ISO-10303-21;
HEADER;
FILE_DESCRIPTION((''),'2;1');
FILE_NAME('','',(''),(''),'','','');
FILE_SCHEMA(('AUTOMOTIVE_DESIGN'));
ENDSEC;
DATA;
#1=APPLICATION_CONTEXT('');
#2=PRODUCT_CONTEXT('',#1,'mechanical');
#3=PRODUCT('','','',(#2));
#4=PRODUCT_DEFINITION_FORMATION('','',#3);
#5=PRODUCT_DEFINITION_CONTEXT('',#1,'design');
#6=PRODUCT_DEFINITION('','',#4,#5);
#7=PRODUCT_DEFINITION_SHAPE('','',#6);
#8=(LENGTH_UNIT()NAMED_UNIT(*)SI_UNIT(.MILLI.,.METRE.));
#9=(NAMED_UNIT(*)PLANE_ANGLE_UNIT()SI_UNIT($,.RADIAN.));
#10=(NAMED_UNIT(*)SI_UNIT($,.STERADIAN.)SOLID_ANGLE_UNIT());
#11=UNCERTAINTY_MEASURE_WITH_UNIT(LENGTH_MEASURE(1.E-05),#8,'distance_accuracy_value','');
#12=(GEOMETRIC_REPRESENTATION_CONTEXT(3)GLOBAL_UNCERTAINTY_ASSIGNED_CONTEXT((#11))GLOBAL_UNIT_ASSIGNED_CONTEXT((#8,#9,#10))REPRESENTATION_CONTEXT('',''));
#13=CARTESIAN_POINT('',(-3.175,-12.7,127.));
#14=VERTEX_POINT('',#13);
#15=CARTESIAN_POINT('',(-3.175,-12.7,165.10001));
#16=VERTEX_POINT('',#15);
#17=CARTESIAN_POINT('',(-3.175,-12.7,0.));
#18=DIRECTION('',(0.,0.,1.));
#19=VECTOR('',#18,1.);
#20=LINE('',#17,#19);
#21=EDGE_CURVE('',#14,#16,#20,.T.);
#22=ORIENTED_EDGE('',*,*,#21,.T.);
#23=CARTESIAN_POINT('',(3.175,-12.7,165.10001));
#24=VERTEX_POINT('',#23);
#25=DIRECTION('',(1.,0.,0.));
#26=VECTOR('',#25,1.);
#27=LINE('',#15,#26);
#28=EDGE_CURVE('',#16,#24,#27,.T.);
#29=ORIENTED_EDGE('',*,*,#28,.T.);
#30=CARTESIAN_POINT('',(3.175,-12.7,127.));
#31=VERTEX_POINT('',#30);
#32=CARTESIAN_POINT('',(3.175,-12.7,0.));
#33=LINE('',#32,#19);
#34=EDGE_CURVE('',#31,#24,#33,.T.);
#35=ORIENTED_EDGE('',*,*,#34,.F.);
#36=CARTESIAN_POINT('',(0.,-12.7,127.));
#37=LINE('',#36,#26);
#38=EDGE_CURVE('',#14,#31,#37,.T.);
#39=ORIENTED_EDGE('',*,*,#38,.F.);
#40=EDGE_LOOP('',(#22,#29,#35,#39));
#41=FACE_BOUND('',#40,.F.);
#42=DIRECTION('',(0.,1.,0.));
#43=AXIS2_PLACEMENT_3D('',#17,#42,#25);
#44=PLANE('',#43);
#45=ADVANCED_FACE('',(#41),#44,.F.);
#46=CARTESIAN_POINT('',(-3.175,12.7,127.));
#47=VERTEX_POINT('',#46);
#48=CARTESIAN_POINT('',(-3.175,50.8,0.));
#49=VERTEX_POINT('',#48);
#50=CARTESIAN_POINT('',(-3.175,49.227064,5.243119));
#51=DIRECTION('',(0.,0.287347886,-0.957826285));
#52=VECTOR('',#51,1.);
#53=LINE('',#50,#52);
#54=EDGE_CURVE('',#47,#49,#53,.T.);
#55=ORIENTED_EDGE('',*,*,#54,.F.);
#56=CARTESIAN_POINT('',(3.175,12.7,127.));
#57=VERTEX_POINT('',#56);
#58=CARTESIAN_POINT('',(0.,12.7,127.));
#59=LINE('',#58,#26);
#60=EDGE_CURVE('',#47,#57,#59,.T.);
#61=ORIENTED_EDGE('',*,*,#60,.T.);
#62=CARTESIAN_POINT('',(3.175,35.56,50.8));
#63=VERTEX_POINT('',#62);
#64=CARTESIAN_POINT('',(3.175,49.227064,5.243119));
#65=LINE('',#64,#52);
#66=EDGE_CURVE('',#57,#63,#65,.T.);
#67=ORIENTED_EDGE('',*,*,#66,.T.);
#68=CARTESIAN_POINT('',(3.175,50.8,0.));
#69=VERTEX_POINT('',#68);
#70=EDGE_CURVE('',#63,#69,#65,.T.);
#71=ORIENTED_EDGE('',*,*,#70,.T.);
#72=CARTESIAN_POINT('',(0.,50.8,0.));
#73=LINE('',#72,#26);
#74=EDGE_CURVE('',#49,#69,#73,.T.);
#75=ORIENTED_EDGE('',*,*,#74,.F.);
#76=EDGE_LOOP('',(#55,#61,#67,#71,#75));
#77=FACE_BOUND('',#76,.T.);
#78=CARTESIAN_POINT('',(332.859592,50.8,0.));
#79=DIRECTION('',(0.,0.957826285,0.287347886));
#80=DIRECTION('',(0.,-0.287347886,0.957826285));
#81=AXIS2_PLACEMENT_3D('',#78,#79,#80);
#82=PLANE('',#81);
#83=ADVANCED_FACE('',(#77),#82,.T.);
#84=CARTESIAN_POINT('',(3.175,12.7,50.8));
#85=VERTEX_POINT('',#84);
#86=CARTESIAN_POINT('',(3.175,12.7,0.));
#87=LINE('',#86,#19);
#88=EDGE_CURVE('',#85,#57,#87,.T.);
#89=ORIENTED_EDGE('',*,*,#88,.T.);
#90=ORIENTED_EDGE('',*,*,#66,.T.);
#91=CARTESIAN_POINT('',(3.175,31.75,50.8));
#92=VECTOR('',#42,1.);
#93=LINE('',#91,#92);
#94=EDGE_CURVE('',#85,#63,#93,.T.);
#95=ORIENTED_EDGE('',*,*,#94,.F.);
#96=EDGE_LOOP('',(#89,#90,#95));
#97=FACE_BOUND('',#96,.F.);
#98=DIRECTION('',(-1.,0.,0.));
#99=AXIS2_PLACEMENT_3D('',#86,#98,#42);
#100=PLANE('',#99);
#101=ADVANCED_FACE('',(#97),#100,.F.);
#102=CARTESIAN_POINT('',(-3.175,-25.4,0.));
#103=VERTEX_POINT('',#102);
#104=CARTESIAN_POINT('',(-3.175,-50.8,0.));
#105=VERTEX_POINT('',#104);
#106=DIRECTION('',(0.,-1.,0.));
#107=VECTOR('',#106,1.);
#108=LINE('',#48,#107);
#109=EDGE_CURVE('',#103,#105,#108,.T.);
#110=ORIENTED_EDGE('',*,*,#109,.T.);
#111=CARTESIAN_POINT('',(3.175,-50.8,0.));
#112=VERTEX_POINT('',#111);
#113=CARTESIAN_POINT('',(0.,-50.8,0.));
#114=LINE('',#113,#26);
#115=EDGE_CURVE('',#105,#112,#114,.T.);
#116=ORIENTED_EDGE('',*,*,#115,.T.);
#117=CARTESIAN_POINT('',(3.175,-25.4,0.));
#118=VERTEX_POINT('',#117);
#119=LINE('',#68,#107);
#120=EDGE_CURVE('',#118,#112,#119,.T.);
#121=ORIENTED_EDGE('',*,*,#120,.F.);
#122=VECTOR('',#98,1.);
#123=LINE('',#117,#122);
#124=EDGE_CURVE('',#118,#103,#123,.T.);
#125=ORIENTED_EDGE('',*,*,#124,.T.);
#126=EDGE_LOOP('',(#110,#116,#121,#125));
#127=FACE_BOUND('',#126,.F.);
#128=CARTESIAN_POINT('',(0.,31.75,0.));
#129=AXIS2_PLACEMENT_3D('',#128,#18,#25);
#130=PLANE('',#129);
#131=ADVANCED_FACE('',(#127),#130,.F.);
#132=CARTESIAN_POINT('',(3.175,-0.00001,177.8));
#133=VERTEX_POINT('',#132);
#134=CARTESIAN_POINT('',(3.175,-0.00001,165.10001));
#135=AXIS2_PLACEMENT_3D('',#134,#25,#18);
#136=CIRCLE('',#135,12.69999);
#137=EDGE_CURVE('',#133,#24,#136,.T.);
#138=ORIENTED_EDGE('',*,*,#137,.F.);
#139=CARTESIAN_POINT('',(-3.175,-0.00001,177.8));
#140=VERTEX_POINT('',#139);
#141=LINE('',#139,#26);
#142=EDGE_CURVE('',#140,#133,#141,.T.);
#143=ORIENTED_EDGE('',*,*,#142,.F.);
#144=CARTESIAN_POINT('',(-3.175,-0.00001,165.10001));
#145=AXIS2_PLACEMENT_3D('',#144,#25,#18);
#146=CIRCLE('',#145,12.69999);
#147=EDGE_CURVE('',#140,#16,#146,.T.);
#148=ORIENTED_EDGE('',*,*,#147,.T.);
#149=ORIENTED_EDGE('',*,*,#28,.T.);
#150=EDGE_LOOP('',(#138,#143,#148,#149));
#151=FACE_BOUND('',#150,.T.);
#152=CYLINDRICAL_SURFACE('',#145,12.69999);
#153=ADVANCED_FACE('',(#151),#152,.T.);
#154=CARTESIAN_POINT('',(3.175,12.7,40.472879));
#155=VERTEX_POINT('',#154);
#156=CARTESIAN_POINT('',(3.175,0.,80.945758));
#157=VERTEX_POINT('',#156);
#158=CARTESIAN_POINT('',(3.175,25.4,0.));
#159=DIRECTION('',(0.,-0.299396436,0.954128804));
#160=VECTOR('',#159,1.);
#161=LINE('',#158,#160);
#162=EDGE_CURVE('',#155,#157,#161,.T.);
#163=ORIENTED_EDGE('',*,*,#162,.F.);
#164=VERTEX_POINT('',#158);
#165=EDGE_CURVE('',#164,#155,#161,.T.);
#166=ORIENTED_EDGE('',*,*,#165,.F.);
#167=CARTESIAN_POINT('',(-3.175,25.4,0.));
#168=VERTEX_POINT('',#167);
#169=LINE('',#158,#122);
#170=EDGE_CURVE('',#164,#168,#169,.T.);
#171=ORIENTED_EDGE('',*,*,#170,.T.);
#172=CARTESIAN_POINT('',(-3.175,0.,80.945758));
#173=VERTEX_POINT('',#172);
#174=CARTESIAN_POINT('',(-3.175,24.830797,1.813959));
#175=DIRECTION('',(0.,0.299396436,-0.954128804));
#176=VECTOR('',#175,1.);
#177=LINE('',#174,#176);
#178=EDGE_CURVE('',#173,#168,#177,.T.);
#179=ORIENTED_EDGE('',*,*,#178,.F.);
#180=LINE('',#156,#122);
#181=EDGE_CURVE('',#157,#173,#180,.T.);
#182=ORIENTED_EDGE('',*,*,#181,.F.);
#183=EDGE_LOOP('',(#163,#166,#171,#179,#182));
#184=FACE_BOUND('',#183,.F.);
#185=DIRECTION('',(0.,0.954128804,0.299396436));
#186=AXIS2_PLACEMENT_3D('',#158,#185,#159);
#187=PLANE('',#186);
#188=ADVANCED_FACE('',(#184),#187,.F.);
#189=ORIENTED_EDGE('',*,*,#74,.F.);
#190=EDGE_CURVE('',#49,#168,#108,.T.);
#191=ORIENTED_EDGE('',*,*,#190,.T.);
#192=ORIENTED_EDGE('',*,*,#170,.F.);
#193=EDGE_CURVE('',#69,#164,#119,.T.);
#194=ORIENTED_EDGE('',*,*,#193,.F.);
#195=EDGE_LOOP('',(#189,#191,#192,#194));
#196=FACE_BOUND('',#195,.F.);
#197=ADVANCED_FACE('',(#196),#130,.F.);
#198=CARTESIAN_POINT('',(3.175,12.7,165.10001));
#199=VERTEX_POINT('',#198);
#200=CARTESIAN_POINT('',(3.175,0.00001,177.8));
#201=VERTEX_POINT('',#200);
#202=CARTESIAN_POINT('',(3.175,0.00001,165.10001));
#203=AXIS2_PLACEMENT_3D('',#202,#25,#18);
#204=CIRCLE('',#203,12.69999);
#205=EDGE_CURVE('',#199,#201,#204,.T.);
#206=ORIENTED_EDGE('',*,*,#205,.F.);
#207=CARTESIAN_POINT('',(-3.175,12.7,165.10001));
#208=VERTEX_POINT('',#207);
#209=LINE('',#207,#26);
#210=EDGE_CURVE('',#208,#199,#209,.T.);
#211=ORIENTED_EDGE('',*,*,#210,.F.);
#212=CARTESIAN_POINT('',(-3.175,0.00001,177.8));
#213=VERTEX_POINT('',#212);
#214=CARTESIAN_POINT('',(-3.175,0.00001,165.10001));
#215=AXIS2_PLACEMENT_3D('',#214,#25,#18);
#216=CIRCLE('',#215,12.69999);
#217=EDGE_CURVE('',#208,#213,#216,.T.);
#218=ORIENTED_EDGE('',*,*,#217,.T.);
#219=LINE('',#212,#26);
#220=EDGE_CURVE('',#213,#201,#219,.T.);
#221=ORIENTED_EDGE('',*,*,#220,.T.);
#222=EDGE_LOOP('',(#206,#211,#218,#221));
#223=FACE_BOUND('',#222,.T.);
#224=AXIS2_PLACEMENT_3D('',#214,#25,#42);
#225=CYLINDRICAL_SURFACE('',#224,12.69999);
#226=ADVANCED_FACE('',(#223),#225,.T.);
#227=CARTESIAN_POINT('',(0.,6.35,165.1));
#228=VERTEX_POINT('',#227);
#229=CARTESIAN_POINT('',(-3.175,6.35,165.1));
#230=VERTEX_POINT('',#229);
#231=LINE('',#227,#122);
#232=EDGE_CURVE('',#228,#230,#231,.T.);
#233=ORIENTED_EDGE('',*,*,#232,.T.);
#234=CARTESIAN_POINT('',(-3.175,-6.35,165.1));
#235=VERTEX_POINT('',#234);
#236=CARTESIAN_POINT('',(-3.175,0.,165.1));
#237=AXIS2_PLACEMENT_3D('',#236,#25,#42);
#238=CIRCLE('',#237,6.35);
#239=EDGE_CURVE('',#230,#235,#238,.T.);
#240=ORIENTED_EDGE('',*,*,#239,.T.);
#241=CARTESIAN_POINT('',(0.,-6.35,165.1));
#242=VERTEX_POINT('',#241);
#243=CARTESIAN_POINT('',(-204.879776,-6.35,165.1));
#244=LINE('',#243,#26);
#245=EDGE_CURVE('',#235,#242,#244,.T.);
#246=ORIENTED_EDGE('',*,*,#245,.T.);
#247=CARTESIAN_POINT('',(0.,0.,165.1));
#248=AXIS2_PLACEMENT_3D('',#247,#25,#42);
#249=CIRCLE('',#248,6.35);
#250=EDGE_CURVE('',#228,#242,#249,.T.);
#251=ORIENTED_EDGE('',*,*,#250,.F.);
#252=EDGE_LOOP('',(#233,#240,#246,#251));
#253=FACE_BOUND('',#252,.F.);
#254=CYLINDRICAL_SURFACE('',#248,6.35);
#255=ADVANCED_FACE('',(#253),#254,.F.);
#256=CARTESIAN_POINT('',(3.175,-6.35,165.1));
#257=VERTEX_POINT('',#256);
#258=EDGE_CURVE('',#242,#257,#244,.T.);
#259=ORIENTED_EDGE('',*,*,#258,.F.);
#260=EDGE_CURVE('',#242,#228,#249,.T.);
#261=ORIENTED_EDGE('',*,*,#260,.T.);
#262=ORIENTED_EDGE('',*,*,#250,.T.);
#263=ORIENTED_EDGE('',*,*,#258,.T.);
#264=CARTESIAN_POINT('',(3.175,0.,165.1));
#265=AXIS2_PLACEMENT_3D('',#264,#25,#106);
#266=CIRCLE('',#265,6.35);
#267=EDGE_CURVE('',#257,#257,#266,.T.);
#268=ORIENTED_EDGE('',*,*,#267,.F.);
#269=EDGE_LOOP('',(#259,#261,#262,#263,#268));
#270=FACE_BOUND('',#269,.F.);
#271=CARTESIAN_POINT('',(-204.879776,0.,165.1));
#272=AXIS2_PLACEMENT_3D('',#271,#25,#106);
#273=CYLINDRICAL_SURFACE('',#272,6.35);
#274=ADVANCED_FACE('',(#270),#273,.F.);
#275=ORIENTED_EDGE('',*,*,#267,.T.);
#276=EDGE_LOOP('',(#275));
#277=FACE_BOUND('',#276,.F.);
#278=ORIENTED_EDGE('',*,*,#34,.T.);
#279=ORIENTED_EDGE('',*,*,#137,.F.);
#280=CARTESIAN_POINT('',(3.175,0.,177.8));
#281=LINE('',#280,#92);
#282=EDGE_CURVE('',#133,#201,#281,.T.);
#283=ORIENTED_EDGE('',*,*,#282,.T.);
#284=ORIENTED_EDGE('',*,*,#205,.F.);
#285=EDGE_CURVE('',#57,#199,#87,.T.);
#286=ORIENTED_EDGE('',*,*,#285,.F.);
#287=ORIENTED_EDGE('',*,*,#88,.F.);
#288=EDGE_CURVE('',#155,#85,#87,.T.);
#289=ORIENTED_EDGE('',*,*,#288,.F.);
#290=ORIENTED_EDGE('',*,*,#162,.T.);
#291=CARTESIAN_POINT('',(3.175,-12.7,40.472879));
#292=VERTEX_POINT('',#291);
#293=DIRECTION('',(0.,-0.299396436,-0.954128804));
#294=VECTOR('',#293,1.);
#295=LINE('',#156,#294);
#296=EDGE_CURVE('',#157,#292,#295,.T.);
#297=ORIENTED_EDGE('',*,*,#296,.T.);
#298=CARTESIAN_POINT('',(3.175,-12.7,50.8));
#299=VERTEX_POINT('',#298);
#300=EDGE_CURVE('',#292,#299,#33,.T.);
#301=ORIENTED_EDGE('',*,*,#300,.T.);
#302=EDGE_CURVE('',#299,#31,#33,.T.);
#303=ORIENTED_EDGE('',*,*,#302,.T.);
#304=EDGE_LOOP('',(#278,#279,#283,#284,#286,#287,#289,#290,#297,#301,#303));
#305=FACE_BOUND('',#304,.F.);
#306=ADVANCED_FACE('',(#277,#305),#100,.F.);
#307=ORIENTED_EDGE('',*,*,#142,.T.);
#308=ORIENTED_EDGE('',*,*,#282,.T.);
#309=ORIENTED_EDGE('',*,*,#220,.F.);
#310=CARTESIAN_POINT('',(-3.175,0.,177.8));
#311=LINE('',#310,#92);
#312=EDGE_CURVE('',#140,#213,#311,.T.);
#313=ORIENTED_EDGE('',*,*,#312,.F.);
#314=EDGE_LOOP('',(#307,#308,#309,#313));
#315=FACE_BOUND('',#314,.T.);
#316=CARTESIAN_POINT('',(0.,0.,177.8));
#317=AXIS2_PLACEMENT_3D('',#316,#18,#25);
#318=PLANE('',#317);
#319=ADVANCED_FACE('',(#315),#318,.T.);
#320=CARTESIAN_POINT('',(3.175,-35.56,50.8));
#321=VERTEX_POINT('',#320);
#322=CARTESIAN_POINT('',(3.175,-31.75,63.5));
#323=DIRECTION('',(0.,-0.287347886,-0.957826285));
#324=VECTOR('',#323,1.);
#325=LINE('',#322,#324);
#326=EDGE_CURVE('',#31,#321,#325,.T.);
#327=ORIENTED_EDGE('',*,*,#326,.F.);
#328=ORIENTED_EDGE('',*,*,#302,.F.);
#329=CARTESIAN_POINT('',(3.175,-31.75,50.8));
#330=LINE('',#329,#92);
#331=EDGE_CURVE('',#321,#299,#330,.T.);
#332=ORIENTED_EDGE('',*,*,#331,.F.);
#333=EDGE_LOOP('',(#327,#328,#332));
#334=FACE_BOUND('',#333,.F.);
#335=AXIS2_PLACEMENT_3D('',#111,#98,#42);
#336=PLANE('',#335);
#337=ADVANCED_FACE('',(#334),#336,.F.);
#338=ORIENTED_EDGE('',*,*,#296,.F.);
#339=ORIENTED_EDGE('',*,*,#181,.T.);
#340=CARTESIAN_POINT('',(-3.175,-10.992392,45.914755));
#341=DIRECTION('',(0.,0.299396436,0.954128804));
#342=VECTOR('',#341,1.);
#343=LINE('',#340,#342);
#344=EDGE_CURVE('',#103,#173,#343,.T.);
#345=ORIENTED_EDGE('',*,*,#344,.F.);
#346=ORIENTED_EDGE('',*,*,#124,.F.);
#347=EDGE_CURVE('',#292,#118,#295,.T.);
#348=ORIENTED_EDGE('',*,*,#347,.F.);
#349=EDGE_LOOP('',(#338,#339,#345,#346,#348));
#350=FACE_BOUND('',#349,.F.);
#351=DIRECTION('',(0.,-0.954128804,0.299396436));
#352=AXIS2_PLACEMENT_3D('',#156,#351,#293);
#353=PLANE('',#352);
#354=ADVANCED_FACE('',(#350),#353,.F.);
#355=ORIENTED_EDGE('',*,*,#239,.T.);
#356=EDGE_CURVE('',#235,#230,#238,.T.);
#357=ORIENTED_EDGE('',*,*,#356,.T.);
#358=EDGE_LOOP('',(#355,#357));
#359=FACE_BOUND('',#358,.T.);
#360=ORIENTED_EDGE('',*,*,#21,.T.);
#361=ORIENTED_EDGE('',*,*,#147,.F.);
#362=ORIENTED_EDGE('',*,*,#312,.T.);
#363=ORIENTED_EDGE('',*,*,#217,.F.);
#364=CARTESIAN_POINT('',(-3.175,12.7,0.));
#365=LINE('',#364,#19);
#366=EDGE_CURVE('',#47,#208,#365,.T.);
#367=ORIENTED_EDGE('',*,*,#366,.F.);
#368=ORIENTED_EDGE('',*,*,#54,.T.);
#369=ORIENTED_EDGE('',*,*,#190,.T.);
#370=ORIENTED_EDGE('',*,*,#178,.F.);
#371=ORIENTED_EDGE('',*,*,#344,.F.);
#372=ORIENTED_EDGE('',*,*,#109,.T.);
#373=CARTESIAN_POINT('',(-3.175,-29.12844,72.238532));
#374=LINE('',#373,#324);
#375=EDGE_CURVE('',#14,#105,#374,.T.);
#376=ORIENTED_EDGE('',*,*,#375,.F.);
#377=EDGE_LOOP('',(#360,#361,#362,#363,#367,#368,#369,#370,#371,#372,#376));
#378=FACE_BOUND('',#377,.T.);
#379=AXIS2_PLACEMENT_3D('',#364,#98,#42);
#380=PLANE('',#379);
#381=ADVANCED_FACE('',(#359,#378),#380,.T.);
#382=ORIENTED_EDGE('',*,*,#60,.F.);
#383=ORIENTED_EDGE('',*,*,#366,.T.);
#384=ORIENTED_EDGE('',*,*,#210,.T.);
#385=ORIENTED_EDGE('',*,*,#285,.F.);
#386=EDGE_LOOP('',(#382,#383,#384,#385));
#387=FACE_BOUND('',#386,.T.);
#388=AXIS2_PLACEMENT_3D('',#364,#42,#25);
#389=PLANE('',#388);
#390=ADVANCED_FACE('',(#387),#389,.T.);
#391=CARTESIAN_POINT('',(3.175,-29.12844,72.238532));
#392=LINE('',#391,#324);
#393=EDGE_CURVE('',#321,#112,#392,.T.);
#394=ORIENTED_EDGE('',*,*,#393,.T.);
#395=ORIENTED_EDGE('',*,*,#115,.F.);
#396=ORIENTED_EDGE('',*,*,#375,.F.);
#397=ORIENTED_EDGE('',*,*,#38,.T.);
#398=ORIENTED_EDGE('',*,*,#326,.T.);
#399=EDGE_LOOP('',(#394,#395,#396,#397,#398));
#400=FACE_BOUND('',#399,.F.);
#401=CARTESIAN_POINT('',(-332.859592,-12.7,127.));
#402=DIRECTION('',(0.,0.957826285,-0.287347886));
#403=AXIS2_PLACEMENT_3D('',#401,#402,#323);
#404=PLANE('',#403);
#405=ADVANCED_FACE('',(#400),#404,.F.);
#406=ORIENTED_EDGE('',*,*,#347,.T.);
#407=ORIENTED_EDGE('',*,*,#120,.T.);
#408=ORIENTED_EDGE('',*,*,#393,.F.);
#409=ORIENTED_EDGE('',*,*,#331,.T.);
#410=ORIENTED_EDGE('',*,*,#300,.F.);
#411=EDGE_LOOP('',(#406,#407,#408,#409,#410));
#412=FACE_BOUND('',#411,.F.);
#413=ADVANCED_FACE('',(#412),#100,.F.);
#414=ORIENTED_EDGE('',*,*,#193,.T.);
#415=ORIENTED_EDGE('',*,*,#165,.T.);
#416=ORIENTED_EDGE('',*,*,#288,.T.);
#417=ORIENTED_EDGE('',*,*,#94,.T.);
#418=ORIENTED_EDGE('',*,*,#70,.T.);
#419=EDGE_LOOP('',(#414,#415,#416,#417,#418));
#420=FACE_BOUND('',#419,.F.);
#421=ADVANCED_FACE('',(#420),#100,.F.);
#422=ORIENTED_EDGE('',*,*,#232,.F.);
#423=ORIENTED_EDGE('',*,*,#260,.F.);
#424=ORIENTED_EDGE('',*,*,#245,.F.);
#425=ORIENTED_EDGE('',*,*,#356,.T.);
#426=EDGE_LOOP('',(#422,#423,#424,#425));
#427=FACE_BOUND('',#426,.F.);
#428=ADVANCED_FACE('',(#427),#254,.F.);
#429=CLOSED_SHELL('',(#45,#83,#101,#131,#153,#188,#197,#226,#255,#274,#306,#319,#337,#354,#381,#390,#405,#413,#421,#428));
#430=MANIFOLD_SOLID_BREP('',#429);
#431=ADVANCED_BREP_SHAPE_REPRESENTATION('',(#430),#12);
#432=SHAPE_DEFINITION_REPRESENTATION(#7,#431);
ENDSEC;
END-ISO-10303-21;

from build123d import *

# Parameters (mm, degrees)
F0_W        = 6.35
F0_H        = 25.4
F1_DEPTH    = 177.8
F0_H_2      = 38.1
F2_DEPTH    = 50.8
F4_D        = 12.7
F4_DEPTH    = 3.176
F5_D        = 12.7
F6_R        = 12.69999
F7_DEPTH    = 127
F8_T4_DEPTH = 665.7191836207
F8_T9_DEPTH = 665.7191836207
F11_DEPTH   = 25.4


# Not quite as in the source:
# - a fillet or chamfer that OpenCascade refuses, or shapes differently, is made with other operations: its cross-section is extruded or revolved along the edge and cut away or added
# - two fillets or chamfers of one size are made in one step
# - a fillet or chamfer is up to 0.001 mm smaller than in the source, because OpenCascade refuses the exact size


with BuildPart() as f1:
    # F0 (on Top) → F1 (new body)
    with BuildSketch(Plane.XY):
        Rectangle(F0_W, F0_H)
    extrude(amount=F1_DEPTH)

    # F0 (on Top) → F2 (join)
    with BuildSketch(Plane.XY):
        with Locations((0, 31.75)):
            Rectangle(F0_W, F0_H_2)
        with Locations((0, -31.75)):
            Rectangle(F0_W, F0_H_2)
    extrude(amount=F2_DEPTH)

    # F4 (through all, one way)
    with BuildSketch(Plane.YZ):
        with Locations((0, 165.1)):
            Circle(F4_D / 2)
    extrude(amount=-F4_DEPTH, mode=Mode.SUBTRACT)

    # F5 (through all)
    with Locations(Plane(origin=(0, 0, 0), x_dir=(0, 1, 0), z_dir=(-1, 0, 0))):
        with Locations((0, -165.1)):
            Hole(F5_D / 2)

    # F6 (radius 12.7 in the source; OpenCascade refuses exactly that, so slightly less here)
    f6_edges = [f1.edges().sort_by_distance(p)[0] for p in [
        (0, -12.7, 177.8),
        (0, 12.7, 177.8),
    ]]
    fillet(f6_edges, radius=F6_R)

    # F0 (on Top) → F7 (join)
    with BuildSketch(Plane.XY):
        with Locations((0, -31.75)):
            Rectangle(F0_W, F0_H_2)
        with Locations((0, 31.75)):
            Rectangle(F0_W, F0_H_2)
    extrude(amount=F7_DEPTH)

    # F8: chamfer of 38.1 x 127 on 2 edges, made by hand


with BuildPart() as f8_tool2:
    # F8_s3 → F8_t4 (new body)
    with BuildSketch(Plane.YZ.offset(332.8595918104)):
        Polygon((50.8, 0), (12.7, 127), (50.8, 127), align=None)
    extrude(amount=-F8_T4_DEPTH)

    split(bisect_by=Plane.XZ.offset(-12.7), keep=Keep.BOTTOM)


with BuildPart() as f1_1:
    add(f1.part)

    # F8_t1: cut F8_tool2
    add(f8_tool2.part, mode=Mode.SUBTRACT)


with BuildPart() as f8_tool7:
    # F8_s8 → F8_t9 (new body)
    with BuildSketch(Plane.YZ.offset(-332.8595918104)):
        Polygon((-12.7, 127), (-50.8, 0), (-50.8, 127), align=None)
    extrude(amount=F8_T9_DEPTH)

    split(bisect_by=Plane.XZ.offset(12.7), keep=Keep.TOP)


with BuildPart() as f1_2:
    add(f1_1.part)

    # F8_t6: cut F8_tool7
    add(f8_tool7.part, mode=Mode.SUBTRACT)

    # F10 (on face) → F11 (cut)
    with BuildSketch(Plane.YZ.offset(3.175)):
        Polygon((25.4, 0), (0, 80.9457584765), (-25.4, 0), align=None)
    extrude(amount=-F11_DEPTH, mode=Mode.SUBTRACT)


solid = f1_2.part
